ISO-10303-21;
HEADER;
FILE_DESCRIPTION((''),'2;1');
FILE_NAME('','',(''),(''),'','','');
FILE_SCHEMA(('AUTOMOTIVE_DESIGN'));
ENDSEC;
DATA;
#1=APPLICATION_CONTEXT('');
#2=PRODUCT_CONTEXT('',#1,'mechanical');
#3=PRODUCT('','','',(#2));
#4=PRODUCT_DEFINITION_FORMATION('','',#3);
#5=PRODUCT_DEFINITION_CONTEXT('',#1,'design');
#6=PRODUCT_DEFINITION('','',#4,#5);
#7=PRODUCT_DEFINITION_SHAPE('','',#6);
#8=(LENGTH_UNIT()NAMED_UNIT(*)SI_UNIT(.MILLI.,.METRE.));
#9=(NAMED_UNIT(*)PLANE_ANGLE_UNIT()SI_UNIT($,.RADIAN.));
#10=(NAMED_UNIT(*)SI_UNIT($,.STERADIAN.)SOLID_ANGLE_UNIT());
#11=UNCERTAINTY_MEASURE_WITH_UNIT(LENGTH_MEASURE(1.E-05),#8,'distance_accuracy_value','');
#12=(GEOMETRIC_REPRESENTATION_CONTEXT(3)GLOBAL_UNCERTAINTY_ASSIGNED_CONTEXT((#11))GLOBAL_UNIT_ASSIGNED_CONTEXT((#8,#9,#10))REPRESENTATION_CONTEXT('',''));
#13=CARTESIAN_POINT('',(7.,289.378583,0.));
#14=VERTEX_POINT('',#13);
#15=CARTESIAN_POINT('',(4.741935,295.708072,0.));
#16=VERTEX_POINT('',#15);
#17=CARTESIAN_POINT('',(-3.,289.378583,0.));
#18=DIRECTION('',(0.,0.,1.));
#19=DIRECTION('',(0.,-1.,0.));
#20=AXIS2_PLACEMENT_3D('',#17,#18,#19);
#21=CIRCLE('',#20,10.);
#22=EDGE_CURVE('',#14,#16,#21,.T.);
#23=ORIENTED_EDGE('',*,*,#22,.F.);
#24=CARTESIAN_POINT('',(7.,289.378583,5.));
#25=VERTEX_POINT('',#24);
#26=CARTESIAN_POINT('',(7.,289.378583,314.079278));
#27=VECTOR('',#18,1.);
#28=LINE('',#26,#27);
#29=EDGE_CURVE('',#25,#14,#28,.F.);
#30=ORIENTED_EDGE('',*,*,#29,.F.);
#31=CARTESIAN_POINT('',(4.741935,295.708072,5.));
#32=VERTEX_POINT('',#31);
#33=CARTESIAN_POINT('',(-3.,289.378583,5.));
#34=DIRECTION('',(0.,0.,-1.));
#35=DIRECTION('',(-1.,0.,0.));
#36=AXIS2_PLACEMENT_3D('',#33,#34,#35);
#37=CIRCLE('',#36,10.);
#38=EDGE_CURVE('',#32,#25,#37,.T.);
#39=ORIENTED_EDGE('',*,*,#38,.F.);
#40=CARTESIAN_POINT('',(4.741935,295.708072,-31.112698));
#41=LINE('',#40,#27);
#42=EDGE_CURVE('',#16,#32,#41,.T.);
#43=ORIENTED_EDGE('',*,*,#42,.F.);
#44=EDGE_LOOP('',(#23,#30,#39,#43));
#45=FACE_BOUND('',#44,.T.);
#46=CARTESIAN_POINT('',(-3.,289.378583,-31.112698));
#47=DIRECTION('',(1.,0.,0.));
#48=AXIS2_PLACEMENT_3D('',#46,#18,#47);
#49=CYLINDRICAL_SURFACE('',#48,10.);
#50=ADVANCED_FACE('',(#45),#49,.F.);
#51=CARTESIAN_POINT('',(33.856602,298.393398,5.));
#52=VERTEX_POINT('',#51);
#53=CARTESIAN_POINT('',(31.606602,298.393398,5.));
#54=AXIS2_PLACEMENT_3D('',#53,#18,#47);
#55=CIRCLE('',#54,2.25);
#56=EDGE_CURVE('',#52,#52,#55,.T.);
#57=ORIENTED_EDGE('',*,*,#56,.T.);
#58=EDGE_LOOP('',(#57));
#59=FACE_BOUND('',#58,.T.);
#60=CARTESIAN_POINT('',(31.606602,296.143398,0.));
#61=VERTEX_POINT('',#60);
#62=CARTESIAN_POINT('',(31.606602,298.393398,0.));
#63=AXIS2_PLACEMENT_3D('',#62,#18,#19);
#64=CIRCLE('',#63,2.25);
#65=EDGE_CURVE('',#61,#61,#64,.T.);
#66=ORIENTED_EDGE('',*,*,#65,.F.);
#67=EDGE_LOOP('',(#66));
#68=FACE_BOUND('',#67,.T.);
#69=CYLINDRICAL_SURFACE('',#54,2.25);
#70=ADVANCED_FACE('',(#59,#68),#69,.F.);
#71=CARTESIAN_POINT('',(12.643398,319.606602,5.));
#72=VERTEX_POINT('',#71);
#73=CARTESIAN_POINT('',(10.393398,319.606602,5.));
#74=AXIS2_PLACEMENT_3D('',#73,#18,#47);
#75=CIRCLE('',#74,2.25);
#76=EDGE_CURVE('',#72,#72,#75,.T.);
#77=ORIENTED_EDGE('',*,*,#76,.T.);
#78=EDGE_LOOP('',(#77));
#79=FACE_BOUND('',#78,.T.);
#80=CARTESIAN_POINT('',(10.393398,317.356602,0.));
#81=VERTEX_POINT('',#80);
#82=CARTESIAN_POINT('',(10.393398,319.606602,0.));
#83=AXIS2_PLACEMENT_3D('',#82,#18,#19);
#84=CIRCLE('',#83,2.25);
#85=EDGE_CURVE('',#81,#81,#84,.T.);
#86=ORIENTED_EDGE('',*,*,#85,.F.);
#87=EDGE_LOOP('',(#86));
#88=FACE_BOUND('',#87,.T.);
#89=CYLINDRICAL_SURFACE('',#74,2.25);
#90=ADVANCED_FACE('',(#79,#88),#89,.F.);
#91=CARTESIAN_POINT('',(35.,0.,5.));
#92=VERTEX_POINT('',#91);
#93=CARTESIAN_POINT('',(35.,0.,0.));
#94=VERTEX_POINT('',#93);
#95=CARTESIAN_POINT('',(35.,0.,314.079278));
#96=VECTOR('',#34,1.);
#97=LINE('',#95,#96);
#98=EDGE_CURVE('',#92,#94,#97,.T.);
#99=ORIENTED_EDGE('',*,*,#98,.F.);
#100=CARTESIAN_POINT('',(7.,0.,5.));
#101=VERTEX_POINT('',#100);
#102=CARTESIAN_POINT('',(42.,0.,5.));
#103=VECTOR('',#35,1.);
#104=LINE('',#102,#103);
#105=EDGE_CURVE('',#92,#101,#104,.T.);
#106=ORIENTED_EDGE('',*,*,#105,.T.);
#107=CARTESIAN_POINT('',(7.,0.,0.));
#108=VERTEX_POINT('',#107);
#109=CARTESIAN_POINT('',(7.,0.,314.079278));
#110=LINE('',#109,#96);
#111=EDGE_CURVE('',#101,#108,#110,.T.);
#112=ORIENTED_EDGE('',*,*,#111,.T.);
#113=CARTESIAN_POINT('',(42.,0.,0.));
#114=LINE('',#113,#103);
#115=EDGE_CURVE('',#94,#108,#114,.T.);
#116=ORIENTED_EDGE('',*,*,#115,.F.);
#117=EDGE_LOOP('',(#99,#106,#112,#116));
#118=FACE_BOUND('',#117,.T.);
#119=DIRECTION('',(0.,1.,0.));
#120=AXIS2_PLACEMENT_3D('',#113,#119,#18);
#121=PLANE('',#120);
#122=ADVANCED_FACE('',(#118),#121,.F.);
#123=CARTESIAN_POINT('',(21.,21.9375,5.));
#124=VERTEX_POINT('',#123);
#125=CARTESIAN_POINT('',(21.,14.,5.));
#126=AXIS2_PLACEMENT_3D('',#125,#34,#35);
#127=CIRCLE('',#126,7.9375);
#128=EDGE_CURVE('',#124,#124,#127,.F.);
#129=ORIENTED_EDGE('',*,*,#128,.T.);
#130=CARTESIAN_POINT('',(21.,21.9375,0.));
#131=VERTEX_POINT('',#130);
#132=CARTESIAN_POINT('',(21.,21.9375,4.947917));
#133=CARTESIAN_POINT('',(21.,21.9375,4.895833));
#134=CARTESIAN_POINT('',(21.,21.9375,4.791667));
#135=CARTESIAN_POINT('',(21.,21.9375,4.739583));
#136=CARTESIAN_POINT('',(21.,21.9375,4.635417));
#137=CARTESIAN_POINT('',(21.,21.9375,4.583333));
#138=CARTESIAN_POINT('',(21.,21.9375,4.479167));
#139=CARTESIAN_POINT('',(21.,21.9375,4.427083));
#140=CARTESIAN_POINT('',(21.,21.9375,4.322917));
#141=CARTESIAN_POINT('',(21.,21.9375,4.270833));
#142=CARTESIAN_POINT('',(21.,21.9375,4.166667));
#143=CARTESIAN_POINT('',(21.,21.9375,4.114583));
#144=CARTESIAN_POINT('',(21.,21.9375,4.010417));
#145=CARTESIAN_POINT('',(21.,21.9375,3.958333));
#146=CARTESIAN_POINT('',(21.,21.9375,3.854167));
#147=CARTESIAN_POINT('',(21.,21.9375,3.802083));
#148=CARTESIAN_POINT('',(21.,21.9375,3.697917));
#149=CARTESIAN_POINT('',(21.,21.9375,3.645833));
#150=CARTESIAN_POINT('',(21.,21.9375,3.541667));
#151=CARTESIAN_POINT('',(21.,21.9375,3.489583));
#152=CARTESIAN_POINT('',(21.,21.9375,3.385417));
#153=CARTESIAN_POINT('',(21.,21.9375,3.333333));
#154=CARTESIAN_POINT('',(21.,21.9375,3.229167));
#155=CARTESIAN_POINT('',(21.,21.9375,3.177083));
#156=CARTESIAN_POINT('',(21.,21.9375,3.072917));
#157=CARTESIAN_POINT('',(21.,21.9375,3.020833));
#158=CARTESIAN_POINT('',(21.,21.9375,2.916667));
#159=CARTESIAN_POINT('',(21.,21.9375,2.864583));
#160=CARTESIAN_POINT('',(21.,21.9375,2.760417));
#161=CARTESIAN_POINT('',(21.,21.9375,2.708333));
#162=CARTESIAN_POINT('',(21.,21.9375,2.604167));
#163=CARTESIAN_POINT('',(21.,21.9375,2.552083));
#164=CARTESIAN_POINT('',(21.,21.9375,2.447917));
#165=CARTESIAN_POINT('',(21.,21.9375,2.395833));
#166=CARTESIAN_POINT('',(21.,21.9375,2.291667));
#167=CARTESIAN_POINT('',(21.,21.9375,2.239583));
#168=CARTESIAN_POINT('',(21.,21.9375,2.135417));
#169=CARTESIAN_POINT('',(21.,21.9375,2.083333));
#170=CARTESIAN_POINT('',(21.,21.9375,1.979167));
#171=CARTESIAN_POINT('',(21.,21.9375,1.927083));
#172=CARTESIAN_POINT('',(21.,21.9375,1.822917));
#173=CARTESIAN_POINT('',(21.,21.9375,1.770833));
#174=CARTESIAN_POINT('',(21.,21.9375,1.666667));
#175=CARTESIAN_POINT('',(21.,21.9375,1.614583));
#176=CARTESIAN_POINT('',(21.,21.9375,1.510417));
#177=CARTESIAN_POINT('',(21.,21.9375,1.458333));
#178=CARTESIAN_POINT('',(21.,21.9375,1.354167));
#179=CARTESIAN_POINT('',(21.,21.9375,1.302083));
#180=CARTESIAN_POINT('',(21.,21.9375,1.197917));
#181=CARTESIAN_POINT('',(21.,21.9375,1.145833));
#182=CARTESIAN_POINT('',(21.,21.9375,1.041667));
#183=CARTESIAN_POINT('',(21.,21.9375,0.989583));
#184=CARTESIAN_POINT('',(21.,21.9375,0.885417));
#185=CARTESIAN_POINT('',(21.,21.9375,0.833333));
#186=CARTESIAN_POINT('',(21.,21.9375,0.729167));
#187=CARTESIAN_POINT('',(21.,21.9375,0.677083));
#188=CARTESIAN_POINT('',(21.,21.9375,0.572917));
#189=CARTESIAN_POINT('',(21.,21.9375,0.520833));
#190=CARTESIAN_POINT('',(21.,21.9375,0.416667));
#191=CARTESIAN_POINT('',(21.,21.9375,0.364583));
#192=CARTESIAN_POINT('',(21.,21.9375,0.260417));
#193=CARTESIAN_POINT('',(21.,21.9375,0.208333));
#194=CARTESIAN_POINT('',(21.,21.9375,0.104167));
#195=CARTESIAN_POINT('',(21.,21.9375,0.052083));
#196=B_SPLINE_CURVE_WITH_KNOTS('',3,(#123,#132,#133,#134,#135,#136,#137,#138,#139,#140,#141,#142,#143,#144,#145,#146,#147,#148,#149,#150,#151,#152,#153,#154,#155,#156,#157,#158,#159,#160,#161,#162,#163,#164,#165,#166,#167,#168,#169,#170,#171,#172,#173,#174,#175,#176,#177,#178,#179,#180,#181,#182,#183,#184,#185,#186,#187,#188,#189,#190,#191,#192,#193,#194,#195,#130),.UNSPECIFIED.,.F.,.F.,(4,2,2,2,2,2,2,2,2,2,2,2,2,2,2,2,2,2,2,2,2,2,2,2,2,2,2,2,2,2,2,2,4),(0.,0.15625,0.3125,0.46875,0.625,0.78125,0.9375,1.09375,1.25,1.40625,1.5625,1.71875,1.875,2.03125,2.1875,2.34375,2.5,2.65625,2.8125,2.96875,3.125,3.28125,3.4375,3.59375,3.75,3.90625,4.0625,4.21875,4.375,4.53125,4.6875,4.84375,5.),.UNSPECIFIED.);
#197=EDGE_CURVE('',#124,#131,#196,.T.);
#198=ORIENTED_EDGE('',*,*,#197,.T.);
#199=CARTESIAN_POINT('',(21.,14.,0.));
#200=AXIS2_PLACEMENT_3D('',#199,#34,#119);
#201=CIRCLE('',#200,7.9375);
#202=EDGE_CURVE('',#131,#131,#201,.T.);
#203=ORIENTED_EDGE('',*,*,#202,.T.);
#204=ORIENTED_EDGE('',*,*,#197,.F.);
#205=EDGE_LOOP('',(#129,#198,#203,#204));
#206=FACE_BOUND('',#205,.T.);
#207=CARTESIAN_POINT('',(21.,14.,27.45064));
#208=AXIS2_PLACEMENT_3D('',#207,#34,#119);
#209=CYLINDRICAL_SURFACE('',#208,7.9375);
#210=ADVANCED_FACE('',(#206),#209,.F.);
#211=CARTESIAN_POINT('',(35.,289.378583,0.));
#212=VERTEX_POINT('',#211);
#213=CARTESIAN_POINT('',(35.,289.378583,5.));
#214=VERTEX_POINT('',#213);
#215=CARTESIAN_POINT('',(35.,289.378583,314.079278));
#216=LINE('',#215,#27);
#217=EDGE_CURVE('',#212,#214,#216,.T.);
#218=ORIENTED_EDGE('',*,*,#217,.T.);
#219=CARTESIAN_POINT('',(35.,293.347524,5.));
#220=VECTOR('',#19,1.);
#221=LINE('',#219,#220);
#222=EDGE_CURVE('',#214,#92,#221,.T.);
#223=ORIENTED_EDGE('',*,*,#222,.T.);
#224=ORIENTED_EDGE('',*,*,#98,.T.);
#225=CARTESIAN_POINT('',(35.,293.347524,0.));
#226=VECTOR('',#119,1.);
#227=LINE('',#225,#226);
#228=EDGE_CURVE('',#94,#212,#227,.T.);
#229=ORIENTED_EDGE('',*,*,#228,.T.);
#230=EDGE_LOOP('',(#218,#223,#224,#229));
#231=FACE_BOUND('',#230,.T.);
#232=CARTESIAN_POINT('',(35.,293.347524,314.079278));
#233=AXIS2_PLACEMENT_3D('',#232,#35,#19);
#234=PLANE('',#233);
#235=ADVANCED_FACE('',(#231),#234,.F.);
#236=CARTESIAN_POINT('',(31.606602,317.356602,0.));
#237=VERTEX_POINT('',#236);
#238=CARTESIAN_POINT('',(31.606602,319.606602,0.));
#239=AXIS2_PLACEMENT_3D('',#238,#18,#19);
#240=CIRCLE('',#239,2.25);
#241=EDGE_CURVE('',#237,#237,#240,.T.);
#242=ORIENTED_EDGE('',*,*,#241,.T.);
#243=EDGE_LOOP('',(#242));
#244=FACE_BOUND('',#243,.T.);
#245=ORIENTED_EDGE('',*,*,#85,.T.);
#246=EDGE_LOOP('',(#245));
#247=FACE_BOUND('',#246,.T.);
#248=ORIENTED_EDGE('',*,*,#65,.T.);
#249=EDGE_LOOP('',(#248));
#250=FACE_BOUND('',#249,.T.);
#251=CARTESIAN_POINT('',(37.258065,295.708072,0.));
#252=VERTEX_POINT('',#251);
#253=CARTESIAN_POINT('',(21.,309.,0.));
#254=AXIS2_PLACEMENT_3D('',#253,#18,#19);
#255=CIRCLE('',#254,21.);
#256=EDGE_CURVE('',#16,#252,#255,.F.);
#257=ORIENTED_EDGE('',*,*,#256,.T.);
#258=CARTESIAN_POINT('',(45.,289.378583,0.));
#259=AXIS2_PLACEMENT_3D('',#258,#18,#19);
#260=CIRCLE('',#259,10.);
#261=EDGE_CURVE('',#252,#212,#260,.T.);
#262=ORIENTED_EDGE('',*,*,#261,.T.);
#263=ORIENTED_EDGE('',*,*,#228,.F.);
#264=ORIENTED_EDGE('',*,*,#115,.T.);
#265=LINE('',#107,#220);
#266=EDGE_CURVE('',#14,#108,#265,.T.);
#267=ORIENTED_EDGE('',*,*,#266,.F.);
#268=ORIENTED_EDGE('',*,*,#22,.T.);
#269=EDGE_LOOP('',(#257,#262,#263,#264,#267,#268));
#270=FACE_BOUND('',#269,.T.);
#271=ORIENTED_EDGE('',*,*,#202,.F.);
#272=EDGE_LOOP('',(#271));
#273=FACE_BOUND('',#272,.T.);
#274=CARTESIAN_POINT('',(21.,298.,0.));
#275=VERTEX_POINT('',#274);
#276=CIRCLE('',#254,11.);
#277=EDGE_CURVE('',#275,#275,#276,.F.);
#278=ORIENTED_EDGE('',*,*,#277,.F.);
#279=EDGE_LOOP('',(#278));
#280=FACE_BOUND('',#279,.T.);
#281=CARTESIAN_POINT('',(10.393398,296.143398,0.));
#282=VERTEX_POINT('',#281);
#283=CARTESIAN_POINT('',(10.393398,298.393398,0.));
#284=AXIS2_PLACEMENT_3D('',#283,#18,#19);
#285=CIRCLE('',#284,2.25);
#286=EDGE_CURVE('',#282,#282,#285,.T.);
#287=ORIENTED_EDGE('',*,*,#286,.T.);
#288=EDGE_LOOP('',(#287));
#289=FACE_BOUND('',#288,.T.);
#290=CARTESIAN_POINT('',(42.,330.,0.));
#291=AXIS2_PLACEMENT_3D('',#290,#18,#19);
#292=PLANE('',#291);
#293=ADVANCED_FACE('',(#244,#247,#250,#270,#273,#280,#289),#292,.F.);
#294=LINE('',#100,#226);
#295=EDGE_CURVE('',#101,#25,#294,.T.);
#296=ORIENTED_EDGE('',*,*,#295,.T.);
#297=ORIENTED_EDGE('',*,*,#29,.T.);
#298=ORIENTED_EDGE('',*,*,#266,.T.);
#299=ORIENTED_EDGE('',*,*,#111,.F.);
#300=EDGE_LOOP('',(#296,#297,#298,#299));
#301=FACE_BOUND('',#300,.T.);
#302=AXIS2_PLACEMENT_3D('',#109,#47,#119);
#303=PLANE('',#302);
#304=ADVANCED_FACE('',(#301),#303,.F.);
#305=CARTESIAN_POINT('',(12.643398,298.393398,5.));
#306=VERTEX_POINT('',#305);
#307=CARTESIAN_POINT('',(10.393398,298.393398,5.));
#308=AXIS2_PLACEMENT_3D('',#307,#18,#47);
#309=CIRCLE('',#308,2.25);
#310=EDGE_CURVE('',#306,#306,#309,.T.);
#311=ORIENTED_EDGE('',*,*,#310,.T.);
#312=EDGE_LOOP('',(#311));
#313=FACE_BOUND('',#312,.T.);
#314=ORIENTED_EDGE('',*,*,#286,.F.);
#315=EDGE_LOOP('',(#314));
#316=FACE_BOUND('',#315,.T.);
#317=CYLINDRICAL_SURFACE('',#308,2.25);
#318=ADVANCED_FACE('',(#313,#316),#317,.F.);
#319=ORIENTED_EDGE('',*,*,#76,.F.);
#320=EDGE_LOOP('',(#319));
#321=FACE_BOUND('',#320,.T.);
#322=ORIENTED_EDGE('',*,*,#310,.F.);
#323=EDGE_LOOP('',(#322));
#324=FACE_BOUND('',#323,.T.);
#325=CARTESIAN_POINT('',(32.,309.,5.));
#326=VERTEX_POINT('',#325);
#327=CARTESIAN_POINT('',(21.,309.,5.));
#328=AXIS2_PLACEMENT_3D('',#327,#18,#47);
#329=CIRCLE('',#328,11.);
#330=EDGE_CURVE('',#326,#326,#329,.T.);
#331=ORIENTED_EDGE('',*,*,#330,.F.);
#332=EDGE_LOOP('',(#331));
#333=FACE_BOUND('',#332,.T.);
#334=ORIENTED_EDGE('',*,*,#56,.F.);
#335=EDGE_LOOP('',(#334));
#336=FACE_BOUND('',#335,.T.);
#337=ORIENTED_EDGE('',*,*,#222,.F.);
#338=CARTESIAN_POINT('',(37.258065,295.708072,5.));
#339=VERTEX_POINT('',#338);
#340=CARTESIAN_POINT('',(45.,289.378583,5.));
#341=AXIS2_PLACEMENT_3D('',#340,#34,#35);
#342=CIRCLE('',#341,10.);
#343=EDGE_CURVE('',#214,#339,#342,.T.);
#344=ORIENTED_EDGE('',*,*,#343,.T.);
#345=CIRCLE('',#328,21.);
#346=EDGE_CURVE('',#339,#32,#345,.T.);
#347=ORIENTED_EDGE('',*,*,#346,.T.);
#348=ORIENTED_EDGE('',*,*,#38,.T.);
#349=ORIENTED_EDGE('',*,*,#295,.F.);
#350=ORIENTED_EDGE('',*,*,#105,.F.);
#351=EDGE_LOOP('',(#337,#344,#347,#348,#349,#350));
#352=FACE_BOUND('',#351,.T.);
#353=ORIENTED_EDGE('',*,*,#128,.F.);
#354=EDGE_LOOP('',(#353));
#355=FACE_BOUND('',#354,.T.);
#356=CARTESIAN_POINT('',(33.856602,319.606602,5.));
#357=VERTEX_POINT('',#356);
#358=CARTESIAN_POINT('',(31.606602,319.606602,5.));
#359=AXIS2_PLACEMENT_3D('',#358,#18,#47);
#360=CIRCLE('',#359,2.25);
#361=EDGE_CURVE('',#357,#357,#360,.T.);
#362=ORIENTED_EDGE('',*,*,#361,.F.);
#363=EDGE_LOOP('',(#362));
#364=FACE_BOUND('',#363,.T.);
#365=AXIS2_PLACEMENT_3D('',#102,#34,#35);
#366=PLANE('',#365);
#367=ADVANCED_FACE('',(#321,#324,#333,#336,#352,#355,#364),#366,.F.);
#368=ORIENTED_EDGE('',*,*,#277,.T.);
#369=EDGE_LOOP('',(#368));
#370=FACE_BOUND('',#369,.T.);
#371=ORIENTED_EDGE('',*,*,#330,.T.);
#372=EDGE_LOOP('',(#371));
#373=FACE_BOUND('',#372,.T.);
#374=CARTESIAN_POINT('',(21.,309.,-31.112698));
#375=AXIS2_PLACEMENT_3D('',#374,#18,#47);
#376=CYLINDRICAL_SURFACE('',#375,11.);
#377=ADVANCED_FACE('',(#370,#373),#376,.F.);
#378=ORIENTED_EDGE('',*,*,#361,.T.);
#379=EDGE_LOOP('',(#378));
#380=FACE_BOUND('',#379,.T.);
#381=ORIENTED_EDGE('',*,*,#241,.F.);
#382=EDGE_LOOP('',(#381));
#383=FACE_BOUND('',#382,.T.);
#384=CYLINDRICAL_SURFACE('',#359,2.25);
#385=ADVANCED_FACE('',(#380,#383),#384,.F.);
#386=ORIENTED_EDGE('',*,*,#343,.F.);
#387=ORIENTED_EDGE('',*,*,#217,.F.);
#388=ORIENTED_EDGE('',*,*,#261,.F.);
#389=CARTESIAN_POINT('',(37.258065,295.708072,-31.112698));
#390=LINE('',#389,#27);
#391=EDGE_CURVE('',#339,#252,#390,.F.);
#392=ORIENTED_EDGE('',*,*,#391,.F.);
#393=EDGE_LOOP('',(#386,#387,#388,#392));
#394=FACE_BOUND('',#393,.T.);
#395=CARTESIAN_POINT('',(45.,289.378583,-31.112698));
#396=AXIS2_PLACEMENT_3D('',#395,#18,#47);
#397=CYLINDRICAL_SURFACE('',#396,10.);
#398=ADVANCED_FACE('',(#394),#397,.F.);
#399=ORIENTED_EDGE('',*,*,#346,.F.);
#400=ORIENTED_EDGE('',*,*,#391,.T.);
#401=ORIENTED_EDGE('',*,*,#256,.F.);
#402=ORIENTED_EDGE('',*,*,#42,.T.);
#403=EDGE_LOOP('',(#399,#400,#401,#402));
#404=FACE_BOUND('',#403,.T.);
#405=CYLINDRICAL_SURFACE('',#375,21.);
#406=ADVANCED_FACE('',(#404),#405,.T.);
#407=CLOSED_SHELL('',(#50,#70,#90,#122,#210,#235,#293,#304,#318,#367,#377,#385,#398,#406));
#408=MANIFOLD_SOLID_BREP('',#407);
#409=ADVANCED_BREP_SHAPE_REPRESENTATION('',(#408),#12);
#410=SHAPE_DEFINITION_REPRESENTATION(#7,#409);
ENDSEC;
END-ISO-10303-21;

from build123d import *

# Parameters (mm, degrees)
SKETCH1_W              = 5
SKETCH1_H              = 330
BOSS_EXTRUDE1_DEPTH    = 42
CUT_EXTRUDE1_START     = -5
CUT_EXTRUDE1_OUTLINE_R = 11
CUT_EXTRUDE1_DEPTH     = 5
M4_CLEARANCE_HOLE1_D   = 4.5
CUT_EXTRUDE3_DEPTH     = 5
FILLET2_R              = 10
SKETCH10_R             = 7.9375
CUT_EXTRUDE4_DEPTH     = 5


# Read off the part's stored shape, not the designer's step: Cut-Extrude1
with BuildPart() as part:
    # Sketch1 → Boss-Extrude1 (new body)
    with BuildSketch(Plane(origin=(0, 0, 0), x_dir=(0, 0, -1), z_dir=(1, 0, 0))):
        with Locations((-2.5, 165)):
            Rectangle(SKETCH1_W, SKETCH1_H)
    extrude(amount=BOSS_EXTRUDE1_DEPTH)

    # Cut-Extrude1 outline → Cut-Extrude1 (cut)
    with BuildSketch(Plane.XY.offset(5).offset(CUT_EXTRUDE1_START)):
        with BuildLine():
            ThreePointArc((0, 309), (6.150757595, 323.849242405), (21, 330))
            Line((21, 330), (0, 330))
            Line((0, 330), (0, 309))
        make_face()
        with BuildLine():
            ThreePointArc((21, 330), (35.849242405, 323.849242405), (42, 309))
            Line((42, 309), (42, 330))
            Line((42, 330), (21, 330))
        make_face()
        with Locations((21, 309)):
            Circle(CUT_EXTRUDE1_OUTLINE_R)
    extrude(amount=CUT_EXTRUDE1_DEPTH, mode=Mode.SUBTRACT)

    # M4 Clearance Hole1 (through all)
    with Locations(Plane.XY.offset(5)):
        with Locations((10.393398282, 319.606601718), (31.606601718, 319.606601718), (31.606601718, 298.393398282), (10.393398282, 298.393398282)):
            Hole(M4_CLEARANCE_HOLE1_D / 2)

    # Sketch9 → Cut-Extrude3 (cut)
    with BuildSketch(Plane(origin=(0, 0, 0), x_dir=(-1, 0, 0), z_dir=(0, 0, -1))):
        with BuildLine():
            Line((-35, 293.347524158), (-35, 0))
            Line((-35, 0), (-42, 0))
            Line((-42, 0), (-42, 309))
            ThreePointArc((-42, 309), (-40.170289513, 300.4267859), (-35, 293.347524158))
        make_face()
        with BuildLine():
            Line((-7, 0), (-7, 293.347524158))
            ThreePointArc((-7, 293.347524158), (-1.829710487, 300.4267859), (0, 309))
            Line((0, 309), (0, 0))
            Line((0, 0), (-7, 0))
        make_face()
    extrude(amount=-CUT_EXTRUDE3_DEPTH, mode=Mode.SUBTRACT)

    # Fillet2
    fillet2_edges = [part.edges().sort_by_distance(p)[0] for p in [
        (35, 293.347524158, 2.5),
        (7, 293.347524158, 2.5),
    ]]
    fillet(fillet2_edges, radius=FILLET2_R)

    # Sketch10 → Cut-Extrude4 (cut)
    with BuildSketch(Plane(origin=(0, 0, 0), x_dir=(-1, 0, 0), z_dir=(0, 0, -1))):
        with Locations(Location((-21, 14, 0), (0, 0, 90))):
            Circle(SKETCH10_R)
    extrude(amount=-CUT_EXTRUDE4_DEPTH, mode=Mode.SUBTRACT)


solid = part.part
